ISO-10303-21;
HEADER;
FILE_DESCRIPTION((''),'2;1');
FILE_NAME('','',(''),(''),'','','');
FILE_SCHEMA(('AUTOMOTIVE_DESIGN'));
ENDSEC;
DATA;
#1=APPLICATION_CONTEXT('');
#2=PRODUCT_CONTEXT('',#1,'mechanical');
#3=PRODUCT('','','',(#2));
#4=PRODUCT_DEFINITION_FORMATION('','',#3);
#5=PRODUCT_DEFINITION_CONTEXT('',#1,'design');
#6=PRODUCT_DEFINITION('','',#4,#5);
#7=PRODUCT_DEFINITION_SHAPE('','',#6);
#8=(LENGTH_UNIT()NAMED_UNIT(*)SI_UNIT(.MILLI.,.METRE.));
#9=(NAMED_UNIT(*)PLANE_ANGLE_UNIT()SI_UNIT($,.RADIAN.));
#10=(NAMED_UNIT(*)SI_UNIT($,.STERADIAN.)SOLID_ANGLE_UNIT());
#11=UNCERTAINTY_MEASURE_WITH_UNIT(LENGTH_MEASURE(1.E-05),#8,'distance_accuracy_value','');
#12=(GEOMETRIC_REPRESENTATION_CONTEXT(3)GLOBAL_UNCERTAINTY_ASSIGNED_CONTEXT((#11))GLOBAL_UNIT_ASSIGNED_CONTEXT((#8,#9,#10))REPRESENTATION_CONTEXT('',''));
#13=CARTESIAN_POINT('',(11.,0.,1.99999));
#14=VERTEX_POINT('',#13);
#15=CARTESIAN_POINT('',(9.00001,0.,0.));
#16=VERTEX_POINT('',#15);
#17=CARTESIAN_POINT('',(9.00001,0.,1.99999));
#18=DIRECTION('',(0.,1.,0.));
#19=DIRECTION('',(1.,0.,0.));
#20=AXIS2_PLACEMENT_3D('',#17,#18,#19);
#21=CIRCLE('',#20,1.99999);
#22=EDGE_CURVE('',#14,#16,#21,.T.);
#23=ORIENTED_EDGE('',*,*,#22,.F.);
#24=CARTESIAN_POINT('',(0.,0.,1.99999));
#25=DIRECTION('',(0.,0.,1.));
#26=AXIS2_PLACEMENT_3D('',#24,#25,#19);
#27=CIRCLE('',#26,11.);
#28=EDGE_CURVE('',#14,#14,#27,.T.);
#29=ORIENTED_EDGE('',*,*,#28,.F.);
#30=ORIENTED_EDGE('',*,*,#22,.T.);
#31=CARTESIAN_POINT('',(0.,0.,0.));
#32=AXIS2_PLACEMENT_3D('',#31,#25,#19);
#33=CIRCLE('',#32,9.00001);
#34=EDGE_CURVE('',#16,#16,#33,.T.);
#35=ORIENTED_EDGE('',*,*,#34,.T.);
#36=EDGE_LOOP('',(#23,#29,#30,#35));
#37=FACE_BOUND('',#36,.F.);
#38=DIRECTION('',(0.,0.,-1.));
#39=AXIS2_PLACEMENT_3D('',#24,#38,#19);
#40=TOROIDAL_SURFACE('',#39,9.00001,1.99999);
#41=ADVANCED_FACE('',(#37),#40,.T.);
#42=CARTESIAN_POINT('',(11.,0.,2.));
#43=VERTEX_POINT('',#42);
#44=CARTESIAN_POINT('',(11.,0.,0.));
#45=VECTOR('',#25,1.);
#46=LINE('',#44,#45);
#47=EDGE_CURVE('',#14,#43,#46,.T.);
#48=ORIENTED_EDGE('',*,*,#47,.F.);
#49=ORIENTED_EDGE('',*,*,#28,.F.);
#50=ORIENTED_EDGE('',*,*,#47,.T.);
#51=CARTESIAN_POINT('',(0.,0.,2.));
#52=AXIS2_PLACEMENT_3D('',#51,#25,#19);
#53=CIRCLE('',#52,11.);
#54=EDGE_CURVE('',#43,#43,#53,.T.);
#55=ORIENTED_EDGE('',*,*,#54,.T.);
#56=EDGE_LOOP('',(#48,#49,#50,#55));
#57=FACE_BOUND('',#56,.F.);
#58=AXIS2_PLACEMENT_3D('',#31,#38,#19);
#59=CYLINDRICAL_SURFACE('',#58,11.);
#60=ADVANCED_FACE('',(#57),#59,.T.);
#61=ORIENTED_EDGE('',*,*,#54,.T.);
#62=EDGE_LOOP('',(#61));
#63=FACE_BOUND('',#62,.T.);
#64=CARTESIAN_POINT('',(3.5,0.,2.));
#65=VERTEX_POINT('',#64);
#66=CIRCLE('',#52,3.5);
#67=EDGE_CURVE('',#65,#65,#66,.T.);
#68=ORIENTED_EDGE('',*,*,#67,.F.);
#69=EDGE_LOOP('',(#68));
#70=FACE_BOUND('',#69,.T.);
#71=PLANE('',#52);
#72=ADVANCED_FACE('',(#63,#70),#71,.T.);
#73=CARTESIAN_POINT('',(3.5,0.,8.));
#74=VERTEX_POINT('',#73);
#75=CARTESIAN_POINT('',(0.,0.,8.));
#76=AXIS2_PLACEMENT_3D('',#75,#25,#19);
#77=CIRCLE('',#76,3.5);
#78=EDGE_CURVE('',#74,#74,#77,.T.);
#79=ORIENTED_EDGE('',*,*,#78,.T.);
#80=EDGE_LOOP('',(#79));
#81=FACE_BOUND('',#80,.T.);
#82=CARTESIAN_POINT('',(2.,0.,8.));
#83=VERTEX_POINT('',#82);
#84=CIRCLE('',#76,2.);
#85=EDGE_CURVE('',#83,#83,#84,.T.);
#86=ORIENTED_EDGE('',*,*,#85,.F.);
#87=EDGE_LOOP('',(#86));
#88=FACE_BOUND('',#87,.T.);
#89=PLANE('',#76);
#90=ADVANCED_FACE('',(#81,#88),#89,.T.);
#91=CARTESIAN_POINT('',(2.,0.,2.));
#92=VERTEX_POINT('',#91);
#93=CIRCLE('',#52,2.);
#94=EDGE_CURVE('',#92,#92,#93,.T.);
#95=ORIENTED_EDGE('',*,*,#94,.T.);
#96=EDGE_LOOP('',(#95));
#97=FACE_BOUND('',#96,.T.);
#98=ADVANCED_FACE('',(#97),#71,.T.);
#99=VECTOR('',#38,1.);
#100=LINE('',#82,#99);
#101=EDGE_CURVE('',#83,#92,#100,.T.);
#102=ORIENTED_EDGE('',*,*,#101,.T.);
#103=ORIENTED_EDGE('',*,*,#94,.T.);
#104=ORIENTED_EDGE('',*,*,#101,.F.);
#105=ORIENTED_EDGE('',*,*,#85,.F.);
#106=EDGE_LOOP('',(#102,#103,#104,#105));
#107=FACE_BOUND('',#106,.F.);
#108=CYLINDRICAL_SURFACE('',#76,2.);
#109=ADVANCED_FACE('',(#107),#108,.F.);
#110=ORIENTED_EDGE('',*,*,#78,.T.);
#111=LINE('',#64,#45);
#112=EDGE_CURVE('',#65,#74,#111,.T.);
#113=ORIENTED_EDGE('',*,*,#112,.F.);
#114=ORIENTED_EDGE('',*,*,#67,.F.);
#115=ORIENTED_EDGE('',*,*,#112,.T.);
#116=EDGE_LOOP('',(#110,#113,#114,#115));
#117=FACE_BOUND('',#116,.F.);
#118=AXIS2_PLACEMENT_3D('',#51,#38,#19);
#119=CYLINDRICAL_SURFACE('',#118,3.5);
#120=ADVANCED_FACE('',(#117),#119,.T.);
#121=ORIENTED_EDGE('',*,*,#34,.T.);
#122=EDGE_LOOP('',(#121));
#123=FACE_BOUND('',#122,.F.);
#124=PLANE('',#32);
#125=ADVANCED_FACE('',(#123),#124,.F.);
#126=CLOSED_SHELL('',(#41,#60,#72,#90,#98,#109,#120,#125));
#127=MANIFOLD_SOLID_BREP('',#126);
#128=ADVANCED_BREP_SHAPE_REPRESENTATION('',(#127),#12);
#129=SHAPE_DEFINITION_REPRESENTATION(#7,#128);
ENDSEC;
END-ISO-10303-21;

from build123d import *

# Parameters (mm, degrees)
F0_R     = 11
F1_DEPTH = 2
F2_R     = 3.5
F3_DEPTH = 6
F4_R     = 2
F5_DEPTH = 6
F6_R     = 1.99999


# Not quite as in the source:
# - a fillet or chamfer is up to 0.001 mm smaller than in the source, because OpenCascade refuses the exact size


with BuildPart() as f1:
    # F0 (on Top) → F1 (new body)
    with BuildSketch(Plane.XY):
        Circle(F0_R)
    extrude(amount=F1_DEPTH)

    # F2 (on face) → F3 (join)
    with BuildSketch(Plane.XY.offset(2)):
        Circle(F2_R)
    extrude(amount=F3_DEPTH)

    # F4 (on face) → F5 (cut)
    with BuildSketch(Plane.XY.offset(8)):
        Circle(F4_R)
    extrude(amount=-F5_DEPTH, mode=Mode.SUBTRACT)

    # F6 (radius 2 in the source; OpenCascade refuses exactly that, so slightly less here)
    f6_edges = [f1.edges().sort_by_distance(p)[0] for p in [
        (-11, 0, 0),
    ]]
    fillet(f6_edges, radius=F6_R)


solid = f1.part
